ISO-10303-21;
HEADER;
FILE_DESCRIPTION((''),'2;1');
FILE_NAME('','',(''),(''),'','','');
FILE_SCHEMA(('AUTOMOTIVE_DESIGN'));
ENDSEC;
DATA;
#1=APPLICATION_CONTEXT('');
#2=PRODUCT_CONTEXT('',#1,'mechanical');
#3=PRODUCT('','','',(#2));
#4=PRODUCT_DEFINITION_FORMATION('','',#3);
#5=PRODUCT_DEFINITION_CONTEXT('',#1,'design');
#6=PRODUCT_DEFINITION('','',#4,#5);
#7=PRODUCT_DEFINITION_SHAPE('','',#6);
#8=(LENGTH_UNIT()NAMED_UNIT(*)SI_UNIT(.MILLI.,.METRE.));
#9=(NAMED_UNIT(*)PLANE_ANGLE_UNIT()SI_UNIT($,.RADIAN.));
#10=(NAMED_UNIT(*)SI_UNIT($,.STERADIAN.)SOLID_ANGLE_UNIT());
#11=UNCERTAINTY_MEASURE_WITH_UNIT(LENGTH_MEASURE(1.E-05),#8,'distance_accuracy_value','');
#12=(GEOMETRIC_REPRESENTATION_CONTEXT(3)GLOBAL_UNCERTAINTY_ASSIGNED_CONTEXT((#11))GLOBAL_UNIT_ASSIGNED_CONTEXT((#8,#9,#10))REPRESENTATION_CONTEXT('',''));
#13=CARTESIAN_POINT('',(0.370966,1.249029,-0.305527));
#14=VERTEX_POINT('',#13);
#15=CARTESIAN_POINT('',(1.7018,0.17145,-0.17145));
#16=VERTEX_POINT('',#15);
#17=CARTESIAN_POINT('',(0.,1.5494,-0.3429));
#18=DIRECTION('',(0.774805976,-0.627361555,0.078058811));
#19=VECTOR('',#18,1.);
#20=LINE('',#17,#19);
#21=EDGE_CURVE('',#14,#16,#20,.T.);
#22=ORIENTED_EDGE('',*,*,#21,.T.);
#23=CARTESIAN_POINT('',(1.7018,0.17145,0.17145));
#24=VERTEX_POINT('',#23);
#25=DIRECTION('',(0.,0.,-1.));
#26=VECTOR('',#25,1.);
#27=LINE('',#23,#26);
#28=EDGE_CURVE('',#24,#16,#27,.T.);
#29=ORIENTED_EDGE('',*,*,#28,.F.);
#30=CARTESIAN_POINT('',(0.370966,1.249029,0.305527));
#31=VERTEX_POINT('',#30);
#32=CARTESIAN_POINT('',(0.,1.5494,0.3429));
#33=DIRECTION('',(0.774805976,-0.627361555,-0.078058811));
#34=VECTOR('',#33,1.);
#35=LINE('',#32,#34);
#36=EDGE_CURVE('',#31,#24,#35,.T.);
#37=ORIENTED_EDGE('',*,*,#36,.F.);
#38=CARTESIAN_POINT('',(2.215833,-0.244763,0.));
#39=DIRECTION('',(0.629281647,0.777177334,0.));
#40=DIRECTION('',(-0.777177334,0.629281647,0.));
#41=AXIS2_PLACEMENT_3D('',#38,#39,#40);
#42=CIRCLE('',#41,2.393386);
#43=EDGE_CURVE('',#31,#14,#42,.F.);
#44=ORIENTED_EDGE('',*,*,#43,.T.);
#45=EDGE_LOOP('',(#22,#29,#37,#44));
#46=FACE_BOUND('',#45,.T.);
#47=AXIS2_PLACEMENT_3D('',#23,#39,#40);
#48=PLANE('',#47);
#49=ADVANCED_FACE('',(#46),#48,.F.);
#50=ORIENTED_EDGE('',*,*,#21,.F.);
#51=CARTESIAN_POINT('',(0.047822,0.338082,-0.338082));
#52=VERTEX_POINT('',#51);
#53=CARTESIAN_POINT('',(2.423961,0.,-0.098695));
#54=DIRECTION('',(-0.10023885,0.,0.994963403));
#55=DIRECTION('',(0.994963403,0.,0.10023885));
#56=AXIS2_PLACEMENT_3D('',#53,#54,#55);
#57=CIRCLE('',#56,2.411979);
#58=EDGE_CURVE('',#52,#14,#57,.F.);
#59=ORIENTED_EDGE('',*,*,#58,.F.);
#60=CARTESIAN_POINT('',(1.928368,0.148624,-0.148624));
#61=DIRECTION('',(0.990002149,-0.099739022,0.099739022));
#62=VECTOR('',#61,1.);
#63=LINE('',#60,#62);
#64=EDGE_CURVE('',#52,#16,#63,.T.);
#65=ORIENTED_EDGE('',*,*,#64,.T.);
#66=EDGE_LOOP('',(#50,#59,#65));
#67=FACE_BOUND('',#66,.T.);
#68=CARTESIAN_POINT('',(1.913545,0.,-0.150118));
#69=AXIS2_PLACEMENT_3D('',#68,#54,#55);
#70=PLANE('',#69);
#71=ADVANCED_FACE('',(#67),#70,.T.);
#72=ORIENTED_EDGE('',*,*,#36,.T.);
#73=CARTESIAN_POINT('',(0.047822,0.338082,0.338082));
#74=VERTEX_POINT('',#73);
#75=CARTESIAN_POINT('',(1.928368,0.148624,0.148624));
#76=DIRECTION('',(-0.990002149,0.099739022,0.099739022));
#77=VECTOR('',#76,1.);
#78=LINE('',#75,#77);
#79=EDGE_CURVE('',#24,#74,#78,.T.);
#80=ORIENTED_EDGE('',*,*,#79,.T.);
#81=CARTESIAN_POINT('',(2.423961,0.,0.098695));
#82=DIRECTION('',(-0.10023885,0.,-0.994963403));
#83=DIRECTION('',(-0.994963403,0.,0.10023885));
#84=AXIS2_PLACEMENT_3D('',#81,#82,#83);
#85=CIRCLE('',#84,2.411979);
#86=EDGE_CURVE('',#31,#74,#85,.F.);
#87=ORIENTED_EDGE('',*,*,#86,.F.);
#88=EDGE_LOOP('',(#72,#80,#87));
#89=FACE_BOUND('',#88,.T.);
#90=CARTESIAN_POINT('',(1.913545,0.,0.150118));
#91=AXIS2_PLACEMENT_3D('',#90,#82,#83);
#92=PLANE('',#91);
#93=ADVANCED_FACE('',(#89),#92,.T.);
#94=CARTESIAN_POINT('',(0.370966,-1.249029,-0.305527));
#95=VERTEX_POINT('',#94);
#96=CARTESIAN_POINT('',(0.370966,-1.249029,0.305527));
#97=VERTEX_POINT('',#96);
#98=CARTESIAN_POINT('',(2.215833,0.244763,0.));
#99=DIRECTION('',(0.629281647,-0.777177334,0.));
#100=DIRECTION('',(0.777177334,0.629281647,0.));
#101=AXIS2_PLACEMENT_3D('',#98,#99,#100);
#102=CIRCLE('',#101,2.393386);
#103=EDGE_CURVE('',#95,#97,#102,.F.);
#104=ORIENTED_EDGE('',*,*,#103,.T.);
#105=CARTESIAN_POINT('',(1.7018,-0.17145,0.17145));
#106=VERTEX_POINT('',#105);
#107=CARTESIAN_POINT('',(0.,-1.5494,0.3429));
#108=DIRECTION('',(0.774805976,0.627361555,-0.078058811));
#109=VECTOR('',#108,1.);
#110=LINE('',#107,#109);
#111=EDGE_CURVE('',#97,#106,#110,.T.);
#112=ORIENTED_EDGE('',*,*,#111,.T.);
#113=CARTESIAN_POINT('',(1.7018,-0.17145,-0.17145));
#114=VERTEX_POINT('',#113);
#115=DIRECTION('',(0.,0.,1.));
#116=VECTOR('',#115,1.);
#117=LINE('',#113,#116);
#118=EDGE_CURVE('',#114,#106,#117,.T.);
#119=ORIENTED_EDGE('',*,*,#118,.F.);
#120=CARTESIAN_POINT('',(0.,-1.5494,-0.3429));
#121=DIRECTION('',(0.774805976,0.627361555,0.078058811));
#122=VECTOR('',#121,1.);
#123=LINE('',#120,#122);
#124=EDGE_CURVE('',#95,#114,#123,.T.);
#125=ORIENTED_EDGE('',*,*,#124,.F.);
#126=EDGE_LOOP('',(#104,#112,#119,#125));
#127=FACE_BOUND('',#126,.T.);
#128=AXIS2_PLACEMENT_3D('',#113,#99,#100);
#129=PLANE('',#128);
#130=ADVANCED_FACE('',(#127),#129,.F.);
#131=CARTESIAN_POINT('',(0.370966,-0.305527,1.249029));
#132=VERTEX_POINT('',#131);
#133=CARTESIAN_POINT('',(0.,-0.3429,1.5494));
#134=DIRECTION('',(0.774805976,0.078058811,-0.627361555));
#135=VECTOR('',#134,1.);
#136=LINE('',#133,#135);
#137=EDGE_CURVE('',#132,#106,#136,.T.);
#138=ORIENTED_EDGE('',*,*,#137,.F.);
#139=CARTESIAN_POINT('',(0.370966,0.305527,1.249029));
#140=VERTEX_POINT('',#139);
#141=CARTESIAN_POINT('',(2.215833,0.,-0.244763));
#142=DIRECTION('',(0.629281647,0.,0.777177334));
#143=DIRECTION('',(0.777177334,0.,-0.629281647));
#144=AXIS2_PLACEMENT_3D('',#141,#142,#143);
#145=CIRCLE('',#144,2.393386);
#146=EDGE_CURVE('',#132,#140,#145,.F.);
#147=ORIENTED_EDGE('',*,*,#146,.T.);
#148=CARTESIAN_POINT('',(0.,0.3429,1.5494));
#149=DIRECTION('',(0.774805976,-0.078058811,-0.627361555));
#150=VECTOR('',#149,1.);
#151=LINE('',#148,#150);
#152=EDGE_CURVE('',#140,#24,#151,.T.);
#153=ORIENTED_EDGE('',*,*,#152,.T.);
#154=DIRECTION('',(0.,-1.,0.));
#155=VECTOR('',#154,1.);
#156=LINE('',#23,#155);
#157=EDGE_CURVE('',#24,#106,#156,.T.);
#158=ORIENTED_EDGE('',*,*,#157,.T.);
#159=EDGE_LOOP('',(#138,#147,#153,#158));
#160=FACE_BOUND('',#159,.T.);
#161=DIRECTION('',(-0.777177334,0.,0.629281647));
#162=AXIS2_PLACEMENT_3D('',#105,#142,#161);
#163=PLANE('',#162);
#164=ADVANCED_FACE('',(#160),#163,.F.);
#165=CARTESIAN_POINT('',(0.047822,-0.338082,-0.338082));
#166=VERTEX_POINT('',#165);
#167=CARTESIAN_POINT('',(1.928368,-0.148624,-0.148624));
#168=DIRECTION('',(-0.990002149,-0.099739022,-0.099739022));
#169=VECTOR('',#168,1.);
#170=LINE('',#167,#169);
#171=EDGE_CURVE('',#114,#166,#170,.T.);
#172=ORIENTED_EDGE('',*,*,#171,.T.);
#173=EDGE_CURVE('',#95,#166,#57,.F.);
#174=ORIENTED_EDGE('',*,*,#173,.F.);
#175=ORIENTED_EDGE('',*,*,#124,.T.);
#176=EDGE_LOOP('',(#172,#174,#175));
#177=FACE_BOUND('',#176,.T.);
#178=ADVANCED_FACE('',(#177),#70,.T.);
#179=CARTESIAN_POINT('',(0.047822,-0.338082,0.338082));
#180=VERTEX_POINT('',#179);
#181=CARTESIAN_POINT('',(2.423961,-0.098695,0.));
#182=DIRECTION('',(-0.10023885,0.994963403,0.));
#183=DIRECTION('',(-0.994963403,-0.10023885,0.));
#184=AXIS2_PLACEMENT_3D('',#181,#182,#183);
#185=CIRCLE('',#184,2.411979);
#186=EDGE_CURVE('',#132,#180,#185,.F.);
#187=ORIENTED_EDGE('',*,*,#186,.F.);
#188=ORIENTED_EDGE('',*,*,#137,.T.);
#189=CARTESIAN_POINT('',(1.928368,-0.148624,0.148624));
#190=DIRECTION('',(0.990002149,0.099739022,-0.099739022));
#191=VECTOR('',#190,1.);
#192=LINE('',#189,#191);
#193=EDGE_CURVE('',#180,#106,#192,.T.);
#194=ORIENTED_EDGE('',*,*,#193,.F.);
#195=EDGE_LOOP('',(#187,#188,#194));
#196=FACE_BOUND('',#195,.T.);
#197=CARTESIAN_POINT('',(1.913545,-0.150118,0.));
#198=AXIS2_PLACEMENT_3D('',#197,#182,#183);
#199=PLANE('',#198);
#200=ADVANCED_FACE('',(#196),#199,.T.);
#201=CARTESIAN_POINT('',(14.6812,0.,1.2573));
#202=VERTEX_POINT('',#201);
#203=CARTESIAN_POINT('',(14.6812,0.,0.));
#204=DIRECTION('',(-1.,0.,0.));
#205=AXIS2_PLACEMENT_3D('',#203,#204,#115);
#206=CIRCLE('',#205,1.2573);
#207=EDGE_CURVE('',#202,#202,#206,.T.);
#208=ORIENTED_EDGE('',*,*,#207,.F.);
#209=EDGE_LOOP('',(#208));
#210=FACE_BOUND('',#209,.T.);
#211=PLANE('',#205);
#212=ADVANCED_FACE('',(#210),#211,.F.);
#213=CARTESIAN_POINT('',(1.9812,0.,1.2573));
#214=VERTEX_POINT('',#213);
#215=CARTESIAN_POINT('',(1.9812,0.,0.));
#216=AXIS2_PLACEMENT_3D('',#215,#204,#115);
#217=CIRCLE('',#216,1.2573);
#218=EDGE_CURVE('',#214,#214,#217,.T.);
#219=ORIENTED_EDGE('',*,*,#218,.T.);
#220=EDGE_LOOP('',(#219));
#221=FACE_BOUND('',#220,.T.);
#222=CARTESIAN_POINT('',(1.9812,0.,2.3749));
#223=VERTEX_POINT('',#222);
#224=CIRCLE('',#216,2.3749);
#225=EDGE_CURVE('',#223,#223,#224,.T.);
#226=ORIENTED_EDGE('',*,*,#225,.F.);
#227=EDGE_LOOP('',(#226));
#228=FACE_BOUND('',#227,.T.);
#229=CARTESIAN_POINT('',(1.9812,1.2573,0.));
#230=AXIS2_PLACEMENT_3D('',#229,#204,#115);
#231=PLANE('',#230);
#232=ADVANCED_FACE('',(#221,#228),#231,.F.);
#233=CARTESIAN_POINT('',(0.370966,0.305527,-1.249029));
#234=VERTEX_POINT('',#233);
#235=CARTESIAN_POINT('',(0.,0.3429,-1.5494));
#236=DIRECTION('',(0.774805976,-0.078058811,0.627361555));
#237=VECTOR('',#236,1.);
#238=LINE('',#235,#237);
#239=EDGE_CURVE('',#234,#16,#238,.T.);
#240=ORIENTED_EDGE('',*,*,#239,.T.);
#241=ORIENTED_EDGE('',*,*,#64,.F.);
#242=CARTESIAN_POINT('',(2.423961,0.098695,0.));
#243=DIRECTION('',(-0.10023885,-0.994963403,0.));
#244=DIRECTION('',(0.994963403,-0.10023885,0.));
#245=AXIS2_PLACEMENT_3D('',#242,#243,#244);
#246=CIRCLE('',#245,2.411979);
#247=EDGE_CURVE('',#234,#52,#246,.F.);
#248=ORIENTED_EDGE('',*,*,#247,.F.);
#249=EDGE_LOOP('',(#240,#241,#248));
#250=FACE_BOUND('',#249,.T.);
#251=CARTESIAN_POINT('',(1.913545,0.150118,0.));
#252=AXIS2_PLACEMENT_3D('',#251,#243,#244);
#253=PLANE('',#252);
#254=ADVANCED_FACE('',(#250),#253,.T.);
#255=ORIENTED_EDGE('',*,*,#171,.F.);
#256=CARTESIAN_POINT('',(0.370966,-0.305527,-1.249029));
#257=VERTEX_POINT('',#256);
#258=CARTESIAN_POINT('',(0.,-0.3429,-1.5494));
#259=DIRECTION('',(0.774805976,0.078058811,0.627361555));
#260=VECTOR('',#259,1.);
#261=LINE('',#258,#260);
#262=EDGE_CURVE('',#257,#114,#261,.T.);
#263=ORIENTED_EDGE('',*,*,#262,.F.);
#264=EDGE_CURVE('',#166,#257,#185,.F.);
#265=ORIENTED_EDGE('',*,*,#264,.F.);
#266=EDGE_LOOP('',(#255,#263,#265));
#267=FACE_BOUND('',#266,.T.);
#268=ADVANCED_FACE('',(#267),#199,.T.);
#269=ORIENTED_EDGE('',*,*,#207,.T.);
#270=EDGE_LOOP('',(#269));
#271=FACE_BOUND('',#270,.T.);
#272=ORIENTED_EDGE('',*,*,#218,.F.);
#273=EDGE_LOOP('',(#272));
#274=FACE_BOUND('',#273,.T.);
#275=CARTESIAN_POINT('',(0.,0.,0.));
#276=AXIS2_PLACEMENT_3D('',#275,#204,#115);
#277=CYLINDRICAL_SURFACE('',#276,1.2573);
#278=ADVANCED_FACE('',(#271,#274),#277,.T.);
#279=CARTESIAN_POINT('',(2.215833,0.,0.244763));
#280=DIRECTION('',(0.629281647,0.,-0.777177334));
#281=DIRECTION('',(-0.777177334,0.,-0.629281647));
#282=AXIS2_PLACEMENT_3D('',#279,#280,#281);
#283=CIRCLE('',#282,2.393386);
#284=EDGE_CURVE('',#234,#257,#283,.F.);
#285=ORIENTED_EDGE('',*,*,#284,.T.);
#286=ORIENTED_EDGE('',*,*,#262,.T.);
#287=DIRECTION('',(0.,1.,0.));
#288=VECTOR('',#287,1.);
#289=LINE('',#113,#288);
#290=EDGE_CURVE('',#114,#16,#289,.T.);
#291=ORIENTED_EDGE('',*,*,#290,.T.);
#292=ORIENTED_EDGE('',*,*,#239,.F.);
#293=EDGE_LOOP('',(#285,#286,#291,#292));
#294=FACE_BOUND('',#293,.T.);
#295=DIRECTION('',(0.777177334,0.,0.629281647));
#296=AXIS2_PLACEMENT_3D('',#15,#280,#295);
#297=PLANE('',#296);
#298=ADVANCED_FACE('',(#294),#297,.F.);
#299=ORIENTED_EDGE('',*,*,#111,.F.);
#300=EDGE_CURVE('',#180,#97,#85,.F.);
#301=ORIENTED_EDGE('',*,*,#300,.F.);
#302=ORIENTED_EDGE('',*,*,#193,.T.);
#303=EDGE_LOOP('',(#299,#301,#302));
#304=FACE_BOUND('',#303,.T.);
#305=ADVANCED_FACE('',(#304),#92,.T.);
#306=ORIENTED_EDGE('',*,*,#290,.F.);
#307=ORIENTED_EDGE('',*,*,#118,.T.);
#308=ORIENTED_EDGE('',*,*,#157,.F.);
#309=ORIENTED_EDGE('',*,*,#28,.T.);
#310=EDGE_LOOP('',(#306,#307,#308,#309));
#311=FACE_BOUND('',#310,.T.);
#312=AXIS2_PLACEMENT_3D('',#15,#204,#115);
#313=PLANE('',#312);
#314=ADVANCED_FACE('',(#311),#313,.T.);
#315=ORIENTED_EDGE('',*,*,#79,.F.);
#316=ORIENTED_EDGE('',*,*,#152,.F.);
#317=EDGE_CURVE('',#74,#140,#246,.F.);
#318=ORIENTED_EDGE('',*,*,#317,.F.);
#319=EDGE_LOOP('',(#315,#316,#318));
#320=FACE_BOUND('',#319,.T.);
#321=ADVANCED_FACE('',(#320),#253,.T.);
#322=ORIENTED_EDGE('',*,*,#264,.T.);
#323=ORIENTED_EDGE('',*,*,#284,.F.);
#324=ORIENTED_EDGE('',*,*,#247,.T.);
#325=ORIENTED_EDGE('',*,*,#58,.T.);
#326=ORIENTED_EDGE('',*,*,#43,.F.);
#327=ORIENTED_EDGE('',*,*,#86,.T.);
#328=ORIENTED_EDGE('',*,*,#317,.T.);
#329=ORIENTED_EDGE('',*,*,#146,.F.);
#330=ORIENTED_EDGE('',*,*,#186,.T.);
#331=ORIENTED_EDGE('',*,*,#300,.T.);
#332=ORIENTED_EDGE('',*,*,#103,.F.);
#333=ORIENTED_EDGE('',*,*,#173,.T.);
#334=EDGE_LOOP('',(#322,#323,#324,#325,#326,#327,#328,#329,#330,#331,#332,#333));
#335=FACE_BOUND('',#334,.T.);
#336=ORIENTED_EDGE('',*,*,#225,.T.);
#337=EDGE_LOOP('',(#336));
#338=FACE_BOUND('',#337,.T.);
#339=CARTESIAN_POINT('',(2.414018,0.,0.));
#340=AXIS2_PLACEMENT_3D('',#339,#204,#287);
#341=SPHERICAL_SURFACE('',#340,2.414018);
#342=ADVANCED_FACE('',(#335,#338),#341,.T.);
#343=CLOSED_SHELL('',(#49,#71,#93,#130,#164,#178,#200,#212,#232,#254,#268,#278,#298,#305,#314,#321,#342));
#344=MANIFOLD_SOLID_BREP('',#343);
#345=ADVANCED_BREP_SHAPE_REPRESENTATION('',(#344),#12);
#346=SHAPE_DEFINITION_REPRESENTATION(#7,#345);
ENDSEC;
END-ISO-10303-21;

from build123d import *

# Parameters (mm, degrees)
CIRPATTERN1_COUNT = 2
CIRPATTERN1_ANGLE = 90


# Read off the part's stored shape, not the designer's step: ThreadSchematic
with BuildPart() as part:
    # ThreadSchematic outline → ThreadSchematic (revolve)
    with BuildSketch(Plane.YX):
        with BuildLine():
            Line((0, 14.6812), (0, 0))
            ThreePointArc((0, 0), (1.546391238, 0.560330696), (2.3749, 1.981200001))
            Line((2.3749, 1.981200001), (1.2573, 1.9812))
            Line((1.2573, 1.9812), (1.2573, 14.6812))
            Line((1.2573, 14.6812), (0, 14.6812))
        make_face()
    revolve(axis=Axis((0, 0, 0), (1, 0, 0)))

    # Sketch3 → Cross section 0
    with BuildSketch(Plane(origin=(0, 0, 0), x_dir=(0, 0, -1), z_dir=(1, 0, 0))):
        with BuildLine():
            Line((0.3429, -1.5494), (-0.3429, -1.5494))
            Line((-0.3429, -1.5494), (-0.3429, 1.5494))
            Line((-0.3429, 1.5494), (0.3429, 1.5494))
            Line((0.3429, 1.5494), (0.3429, -1.5494))
        make_face()
    # Sketch4 → Cross section 1
    with BuildSketch(Plane(origin=(1.7018, 0, 0), x_dir=(0, 0, -1), z_dir=(1, 0, 0))):
        with BuildLine():
            Line((0.17145, -0.17145), (-0.17145, -0.17145))
            Line((-0.17145, -0.17145), (-0.17145, 0.17145))
            Line((-0.17145, 0.17145), (0.17145, 0.17145))
            Line((0.17145, 0.17145), (0.17145, -0.17145))
        make_face()
    cross = loft(mode=Mode.SUBTRACT)

    # CirPattern1: Cross ×2 about axis
    cirpattern1_axis = Axis((0, 0, 0), (1, 0, 0))
    for i in range(1, CIRPATTERN1_COUNT):
        add(cross.rotate(cirpattern1_axis, i * CIRPATTERN1_ANGLE / (CIRPATTERN1_COUNT - 1)), mode=Mode.SUBTRACT)


solid = part.part
